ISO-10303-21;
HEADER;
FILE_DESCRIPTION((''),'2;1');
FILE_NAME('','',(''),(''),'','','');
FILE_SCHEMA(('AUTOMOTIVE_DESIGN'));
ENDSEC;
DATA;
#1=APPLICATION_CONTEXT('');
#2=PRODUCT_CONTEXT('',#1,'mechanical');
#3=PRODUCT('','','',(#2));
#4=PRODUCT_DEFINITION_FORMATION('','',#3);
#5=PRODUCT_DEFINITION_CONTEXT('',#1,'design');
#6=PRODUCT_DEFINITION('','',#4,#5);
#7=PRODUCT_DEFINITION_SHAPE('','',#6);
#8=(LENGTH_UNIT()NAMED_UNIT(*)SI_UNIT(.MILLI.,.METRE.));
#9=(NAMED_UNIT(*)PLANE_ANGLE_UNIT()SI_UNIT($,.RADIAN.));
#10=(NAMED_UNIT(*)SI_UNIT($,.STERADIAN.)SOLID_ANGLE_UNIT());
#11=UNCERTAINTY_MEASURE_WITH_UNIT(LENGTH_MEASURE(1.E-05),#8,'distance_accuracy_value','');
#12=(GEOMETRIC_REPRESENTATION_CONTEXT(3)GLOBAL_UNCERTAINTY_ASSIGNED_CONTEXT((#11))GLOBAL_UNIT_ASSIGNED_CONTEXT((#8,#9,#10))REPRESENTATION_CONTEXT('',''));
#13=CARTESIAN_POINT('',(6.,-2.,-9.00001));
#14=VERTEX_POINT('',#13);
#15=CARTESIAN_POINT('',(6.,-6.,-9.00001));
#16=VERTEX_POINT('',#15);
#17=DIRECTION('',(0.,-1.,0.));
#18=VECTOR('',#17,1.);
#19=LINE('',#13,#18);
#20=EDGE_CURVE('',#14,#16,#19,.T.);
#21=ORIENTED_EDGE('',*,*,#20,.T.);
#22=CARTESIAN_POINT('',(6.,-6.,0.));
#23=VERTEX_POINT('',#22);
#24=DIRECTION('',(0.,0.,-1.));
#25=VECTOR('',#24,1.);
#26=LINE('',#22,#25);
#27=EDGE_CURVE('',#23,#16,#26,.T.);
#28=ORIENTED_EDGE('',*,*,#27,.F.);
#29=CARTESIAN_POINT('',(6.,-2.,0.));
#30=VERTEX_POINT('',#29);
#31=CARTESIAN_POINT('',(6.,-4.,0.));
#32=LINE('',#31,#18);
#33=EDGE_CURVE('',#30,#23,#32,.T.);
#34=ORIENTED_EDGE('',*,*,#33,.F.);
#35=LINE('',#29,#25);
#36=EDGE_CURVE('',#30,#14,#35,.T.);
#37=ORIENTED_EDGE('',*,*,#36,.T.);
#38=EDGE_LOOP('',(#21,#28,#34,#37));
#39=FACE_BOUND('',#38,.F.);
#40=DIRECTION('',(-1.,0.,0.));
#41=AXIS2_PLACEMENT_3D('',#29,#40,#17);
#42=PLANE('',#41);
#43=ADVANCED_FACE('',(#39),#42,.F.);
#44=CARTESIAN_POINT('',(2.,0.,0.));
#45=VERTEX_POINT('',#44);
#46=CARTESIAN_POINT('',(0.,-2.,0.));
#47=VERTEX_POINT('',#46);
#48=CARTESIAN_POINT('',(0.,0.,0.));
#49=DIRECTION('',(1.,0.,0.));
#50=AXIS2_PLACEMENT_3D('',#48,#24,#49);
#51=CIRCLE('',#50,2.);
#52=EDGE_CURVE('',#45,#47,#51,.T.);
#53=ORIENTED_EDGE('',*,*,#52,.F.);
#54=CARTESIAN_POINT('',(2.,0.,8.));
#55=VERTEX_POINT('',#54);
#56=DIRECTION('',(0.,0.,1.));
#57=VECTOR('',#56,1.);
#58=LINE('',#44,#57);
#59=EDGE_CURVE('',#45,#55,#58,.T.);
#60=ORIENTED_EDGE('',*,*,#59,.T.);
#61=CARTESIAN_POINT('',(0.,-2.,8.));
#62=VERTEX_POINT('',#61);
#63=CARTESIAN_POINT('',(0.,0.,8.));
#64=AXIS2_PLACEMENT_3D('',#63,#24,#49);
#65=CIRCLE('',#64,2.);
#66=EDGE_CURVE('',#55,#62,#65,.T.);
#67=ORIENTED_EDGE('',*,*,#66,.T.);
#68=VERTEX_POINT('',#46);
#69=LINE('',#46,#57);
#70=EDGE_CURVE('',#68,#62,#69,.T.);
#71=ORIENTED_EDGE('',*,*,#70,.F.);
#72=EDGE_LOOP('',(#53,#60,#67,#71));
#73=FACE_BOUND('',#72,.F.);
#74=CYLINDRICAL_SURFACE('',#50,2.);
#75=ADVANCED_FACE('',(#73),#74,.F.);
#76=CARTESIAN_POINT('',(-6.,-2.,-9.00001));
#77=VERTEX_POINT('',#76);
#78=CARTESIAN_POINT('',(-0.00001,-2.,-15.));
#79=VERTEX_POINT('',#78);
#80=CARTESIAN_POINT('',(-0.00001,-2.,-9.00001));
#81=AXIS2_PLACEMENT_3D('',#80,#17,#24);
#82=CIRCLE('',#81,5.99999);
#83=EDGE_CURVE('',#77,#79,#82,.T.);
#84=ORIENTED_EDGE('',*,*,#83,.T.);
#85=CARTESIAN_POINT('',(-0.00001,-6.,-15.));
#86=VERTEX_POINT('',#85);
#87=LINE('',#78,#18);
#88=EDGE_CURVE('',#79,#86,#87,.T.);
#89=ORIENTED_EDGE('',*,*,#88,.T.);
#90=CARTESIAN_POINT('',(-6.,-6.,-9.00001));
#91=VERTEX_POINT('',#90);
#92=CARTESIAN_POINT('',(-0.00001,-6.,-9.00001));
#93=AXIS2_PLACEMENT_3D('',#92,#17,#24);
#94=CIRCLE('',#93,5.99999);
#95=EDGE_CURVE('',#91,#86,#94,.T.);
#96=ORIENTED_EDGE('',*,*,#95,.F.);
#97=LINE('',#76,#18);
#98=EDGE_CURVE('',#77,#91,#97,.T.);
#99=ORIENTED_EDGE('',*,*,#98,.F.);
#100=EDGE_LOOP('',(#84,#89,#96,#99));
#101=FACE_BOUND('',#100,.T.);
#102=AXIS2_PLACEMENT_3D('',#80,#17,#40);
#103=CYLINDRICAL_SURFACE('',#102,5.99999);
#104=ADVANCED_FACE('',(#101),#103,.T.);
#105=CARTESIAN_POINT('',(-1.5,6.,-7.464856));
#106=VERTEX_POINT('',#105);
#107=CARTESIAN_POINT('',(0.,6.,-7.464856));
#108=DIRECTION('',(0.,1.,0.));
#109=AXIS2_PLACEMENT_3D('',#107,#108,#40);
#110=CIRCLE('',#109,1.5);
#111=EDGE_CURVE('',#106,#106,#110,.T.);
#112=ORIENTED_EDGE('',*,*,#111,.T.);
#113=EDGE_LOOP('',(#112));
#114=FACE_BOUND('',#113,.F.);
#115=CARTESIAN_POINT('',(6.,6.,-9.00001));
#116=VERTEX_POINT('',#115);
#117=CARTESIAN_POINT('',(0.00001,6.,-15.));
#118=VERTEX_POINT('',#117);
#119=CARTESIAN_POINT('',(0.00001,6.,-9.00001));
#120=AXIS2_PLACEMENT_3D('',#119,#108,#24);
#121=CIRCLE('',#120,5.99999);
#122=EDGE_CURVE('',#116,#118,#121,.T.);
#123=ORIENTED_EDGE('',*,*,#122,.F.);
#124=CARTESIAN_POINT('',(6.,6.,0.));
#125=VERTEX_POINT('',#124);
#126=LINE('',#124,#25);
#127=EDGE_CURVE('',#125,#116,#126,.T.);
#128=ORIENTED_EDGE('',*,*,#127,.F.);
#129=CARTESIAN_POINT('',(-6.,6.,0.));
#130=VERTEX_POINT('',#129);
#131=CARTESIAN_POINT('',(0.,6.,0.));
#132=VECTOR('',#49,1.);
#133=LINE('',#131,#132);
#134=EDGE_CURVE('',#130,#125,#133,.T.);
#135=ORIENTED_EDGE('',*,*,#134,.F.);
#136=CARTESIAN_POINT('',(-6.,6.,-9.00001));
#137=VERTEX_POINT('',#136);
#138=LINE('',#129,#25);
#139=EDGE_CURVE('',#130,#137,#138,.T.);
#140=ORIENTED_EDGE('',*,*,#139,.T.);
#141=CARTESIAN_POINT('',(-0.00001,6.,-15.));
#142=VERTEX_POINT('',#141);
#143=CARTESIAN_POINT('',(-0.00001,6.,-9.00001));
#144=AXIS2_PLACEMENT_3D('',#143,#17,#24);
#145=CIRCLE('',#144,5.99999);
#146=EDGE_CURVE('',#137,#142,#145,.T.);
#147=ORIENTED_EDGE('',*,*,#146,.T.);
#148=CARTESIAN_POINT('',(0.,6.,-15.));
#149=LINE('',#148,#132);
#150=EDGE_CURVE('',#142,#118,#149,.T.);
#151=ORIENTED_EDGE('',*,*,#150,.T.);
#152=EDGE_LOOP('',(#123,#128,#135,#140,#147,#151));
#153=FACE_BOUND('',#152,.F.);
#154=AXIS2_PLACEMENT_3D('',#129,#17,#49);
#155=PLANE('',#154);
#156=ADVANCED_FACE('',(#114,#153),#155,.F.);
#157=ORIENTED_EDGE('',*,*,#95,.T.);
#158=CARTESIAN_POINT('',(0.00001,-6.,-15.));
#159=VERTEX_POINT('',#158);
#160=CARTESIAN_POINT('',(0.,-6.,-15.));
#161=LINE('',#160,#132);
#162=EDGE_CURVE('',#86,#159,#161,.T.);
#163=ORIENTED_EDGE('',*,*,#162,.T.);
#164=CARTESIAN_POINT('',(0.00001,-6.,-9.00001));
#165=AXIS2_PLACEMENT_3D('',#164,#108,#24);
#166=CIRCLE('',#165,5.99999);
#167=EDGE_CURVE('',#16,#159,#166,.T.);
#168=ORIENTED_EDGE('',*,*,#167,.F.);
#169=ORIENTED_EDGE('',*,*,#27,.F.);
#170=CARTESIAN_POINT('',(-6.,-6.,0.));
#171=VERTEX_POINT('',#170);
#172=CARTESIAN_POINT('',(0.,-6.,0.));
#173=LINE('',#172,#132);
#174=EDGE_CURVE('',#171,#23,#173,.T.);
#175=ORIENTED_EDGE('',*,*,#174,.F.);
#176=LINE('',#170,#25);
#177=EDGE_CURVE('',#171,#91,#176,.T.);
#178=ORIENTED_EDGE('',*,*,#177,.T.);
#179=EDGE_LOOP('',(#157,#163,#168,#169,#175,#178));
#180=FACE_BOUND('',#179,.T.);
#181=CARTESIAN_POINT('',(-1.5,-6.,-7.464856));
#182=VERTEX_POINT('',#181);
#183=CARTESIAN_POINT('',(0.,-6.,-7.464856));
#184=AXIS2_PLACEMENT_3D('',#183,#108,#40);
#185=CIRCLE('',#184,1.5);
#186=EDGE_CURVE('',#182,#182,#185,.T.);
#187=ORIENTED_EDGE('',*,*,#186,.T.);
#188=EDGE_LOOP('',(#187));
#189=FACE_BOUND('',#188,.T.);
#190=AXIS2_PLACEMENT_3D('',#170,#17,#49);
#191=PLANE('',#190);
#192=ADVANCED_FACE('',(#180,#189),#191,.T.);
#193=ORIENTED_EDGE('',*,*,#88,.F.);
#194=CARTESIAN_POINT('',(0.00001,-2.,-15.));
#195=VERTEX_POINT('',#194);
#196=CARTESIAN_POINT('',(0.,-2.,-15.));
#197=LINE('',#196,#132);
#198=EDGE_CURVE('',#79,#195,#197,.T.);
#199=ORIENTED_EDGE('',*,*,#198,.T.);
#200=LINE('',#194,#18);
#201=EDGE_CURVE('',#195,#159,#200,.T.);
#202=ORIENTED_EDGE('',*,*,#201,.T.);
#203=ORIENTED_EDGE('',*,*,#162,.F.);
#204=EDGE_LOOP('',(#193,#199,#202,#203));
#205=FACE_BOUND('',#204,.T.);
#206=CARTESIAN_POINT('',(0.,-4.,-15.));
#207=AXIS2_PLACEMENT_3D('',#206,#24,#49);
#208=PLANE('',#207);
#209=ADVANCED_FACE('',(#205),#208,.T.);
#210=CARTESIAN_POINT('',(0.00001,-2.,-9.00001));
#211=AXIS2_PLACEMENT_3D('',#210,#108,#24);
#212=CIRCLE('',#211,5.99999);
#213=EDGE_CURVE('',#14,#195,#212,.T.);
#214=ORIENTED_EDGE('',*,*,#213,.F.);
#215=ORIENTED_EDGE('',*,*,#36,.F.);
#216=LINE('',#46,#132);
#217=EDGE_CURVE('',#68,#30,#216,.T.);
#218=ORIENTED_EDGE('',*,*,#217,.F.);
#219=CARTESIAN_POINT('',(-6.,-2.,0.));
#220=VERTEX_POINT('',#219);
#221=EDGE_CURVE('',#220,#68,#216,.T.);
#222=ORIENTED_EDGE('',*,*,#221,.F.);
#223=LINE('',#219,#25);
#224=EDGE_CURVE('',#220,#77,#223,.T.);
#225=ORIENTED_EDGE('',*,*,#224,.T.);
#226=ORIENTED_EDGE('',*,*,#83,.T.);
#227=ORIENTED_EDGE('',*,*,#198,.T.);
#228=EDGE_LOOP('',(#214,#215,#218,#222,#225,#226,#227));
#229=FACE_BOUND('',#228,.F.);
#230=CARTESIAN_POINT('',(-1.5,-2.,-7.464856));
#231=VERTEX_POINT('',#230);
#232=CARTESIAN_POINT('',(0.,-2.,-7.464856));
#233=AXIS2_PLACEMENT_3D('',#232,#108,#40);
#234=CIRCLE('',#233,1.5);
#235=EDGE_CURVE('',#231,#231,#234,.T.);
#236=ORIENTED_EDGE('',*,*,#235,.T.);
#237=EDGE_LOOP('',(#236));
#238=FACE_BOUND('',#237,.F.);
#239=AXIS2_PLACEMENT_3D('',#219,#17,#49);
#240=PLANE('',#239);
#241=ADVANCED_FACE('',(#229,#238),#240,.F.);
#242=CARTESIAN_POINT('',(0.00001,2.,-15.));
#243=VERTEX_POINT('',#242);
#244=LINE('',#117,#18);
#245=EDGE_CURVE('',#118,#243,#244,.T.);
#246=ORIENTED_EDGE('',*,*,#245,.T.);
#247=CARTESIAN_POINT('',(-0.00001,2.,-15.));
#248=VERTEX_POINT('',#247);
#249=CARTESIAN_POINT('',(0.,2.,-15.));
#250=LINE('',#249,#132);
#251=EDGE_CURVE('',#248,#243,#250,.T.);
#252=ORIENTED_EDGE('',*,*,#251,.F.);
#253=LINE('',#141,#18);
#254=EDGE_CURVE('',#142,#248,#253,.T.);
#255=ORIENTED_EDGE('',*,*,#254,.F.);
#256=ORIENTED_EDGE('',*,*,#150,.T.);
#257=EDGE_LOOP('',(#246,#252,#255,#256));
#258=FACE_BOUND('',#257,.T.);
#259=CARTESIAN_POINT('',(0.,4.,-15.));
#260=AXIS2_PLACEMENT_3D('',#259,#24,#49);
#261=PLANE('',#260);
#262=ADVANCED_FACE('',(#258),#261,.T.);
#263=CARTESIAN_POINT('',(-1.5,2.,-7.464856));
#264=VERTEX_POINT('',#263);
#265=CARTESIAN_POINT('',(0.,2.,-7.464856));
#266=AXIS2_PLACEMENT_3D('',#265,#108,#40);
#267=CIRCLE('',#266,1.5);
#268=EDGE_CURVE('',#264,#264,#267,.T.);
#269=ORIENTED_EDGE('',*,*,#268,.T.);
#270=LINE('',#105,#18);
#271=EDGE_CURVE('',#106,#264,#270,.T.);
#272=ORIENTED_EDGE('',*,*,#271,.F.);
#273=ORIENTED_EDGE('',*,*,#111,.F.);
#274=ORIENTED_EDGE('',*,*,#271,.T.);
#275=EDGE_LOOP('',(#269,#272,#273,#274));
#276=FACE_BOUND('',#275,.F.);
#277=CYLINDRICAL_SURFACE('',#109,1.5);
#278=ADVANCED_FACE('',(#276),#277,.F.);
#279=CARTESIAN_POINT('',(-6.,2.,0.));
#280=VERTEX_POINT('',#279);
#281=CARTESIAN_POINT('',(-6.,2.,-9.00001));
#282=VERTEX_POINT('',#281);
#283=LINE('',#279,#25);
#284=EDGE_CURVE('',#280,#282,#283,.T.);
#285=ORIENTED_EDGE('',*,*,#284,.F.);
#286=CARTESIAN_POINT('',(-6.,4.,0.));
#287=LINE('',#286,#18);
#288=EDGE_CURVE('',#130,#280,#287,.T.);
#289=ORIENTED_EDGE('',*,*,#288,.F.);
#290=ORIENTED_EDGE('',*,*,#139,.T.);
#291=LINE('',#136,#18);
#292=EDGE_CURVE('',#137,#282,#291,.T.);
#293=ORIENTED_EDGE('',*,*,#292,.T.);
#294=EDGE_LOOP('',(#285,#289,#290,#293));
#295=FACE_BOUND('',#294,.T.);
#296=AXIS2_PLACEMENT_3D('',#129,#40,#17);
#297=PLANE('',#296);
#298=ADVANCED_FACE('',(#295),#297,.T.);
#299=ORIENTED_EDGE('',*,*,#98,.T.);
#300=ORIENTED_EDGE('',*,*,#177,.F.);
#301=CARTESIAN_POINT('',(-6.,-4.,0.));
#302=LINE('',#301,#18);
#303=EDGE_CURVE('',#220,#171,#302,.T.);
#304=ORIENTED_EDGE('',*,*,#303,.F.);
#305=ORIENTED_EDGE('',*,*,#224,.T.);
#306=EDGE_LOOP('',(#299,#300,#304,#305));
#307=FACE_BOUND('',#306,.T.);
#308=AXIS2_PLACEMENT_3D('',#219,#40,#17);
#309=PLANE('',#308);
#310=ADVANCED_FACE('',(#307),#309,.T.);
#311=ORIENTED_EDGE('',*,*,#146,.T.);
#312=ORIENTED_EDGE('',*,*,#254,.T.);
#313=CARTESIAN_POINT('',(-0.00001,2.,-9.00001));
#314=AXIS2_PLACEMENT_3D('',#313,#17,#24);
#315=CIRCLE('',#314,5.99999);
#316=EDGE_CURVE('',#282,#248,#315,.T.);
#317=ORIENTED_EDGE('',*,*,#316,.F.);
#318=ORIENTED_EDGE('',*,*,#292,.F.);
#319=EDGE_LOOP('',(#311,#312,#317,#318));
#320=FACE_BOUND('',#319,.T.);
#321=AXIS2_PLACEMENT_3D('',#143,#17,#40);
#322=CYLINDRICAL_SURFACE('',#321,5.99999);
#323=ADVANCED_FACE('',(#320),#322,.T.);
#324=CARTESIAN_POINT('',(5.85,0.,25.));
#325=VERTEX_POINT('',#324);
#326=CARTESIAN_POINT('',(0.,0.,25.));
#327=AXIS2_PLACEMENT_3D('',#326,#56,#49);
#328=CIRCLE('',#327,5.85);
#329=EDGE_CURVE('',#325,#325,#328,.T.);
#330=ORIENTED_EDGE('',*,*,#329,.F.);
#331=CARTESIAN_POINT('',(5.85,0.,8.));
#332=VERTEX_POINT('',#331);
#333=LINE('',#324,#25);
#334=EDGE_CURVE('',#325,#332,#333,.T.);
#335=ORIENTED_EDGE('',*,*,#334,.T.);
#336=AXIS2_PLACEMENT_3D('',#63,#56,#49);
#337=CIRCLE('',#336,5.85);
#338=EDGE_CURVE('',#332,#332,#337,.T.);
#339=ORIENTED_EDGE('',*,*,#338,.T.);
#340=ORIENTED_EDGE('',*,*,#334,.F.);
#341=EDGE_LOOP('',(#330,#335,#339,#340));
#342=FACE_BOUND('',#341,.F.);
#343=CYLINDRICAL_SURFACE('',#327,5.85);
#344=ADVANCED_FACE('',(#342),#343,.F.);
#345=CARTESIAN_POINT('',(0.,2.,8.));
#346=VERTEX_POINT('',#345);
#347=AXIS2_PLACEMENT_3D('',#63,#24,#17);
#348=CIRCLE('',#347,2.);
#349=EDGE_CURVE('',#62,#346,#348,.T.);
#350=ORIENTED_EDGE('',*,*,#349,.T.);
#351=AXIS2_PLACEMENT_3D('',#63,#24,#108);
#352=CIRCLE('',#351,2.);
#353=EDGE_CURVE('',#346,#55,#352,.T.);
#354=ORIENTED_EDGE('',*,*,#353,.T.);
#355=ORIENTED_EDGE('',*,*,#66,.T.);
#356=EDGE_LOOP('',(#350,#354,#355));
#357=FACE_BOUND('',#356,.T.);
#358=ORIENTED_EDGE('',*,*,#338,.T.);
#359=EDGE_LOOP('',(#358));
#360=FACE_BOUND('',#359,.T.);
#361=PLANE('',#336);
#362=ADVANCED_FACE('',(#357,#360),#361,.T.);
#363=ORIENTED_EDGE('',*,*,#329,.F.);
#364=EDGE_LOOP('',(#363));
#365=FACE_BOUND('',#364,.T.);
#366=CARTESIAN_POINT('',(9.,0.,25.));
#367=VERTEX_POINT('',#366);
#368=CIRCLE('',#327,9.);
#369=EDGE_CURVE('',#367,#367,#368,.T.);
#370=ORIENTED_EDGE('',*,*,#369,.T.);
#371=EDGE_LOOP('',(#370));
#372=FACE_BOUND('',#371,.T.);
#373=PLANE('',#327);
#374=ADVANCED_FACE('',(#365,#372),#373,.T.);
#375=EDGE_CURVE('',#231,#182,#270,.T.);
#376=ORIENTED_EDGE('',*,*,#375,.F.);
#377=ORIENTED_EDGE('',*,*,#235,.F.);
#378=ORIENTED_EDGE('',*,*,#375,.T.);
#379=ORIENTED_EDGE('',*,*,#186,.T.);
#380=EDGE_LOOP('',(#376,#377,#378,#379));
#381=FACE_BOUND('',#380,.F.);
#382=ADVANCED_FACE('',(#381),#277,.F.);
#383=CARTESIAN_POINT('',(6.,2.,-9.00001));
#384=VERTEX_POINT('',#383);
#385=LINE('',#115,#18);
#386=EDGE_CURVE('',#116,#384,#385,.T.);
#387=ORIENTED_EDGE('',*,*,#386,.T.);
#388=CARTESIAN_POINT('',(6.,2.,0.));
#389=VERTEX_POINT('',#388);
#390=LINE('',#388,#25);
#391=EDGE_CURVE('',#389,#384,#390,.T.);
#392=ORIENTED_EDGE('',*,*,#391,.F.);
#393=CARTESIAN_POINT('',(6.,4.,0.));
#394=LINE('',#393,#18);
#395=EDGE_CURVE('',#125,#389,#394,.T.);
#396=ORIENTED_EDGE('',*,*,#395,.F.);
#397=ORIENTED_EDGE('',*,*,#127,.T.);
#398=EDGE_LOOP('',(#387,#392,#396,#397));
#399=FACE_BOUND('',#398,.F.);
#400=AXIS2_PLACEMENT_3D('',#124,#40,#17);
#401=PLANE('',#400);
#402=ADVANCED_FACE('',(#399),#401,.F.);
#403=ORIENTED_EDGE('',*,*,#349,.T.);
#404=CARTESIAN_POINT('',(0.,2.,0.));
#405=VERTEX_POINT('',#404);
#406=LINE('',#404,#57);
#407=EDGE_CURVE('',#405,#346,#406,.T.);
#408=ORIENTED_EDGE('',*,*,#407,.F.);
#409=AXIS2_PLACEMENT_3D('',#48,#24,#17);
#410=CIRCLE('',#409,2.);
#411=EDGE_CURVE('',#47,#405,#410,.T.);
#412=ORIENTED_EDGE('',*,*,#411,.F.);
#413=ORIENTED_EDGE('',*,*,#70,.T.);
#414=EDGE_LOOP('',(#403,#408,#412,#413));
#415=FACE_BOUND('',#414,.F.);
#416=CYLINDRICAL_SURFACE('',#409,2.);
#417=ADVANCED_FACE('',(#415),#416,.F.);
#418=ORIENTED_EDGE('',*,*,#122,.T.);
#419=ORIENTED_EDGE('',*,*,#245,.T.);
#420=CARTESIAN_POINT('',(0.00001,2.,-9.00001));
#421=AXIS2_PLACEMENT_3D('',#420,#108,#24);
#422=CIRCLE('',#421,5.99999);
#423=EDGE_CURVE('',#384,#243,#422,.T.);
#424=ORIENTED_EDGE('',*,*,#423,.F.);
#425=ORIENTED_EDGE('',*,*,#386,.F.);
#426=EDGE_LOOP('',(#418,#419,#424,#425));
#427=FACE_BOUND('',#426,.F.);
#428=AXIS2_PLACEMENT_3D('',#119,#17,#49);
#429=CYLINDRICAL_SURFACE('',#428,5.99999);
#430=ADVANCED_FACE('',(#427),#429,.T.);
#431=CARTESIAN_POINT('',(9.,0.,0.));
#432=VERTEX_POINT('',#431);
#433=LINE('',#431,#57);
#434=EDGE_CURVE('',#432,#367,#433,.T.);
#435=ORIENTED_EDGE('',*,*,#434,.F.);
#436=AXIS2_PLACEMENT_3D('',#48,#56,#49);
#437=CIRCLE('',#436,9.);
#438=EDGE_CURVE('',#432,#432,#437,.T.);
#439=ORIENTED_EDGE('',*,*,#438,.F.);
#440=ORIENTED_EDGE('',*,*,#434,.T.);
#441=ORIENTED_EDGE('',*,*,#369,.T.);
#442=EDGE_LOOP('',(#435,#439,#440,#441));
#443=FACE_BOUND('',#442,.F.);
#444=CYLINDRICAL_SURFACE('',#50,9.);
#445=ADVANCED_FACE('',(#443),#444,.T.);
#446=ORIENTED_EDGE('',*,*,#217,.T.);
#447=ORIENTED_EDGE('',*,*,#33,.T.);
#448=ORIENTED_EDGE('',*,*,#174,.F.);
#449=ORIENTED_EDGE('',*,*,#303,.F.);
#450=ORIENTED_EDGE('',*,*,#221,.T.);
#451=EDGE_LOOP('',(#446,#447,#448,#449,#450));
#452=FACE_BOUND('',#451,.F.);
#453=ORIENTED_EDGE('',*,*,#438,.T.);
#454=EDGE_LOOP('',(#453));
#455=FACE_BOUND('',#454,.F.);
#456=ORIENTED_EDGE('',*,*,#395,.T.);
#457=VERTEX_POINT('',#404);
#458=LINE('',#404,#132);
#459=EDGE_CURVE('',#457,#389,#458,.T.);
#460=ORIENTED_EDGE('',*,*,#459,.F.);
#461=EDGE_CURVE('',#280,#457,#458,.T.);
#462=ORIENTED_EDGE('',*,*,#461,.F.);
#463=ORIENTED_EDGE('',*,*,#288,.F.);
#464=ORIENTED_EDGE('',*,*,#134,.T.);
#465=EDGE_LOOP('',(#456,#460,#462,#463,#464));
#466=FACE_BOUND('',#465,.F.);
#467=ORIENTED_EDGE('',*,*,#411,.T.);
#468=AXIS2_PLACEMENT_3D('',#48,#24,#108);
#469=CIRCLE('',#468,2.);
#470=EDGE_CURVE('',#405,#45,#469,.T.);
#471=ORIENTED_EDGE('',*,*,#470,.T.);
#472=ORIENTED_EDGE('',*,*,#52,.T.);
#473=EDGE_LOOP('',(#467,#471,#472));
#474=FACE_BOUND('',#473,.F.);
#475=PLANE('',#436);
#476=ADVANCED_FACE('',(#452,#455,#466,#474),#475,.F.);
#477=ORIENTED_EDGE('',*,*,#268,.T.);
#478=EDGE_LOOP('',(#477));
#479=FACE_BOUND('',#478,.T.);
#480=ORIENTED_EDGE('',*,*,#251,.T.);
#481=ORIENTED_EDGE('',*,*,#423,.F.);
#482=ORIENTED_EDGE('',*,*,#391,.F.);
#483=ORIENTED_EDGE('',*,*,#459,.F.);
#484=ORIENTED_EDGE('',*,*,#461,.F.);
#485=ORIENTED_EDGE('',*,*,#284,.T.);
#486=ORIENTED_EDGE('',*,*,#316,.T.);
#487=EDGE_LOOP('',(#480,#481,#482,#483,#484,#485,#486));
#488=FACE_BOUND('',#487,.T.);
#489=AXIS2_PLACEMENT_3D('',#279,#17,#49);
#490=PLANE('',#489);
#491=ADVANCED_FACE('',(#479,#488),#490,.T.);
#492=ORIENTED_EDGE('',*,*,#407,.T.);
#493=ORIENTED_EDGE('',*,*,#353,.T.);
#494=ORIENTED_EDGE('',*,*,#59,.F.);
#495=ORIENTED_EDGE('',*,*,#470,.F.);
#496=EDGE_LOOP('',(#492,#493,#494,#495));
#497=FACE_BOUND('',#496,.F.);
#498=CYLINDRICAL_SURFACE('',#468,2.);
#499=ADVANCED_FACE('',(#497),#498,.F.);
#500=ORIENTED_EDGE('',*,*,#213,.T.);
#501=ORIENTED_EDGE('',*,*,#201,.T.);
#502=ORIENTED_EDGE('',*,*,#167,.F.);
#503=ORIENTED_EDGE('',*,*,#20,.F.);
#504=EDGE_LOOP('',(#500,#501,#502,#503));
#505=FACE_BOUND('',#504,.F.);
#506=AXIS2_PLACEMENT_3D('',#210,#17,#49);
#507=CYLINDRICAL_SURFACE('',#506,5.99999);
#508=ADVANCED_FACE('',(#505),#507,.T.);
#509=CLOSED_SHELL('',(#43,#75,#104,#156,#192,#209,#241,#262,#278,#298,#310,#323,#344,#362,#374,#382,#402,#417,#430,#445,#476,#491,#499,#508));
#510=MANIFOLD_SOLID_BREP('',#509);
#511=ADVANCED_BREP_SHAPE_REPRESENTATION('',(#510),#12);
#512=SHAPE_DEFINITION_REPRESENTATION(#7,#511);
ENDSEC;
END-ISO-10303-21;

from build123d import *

# Parameters (mm, degrees)
F0_R      = 9
F1_DEPTH  = 25
F2_W      = 12
F2_H      = 4
F3_DEPTH  = 15
F4_R      = 1.5
F5_DEPTH  = 12
F6_R      = 5.99999
F7_R      = 5.85
F8_DEPTH  = 17
F10_DEPTH = 8


# Not quite as in the source:
# - a fillet or chamfer is up to 0.001 mm smaller than in the source, because OpenCascade refuses the exact size


with BuildPart() as f1:
    # F0 (on Top) → F1 (new body)
    with BuildSketch(Plane.XY):
        Circle(F0_R)
    extrude(amount=F1_DEPTH)

    # F2 (on face) → F3 (join)
    with BuildSketch(Plane(origin=(0, 0, 0), x_dir=(1, 0, 0), z_dir=(0, 0, -1))):
        with Locations((0, -4)):
            Rectangle(F2_W, F2_H)
        with Locations((0, 4)):
            Rectangle(F2_W, F2_H)
    extrude(amount=F3_DEPTH)

    # F4 (on face) → F5 (cut, through all)
    with BuildSketch(Plane(origin=(0, 6, 0), x_dir=(-1, 0, 0), z_dir=(0, 1, 0))):
        with Locations((0, -7.464856375)):
            Circle(F4_R)
    extrude(amount=-F5_DEPTH, mode=Mode.SUBTRACT)

    # F6 (radius 6 in the source; OpenCascade refuses exactly that, so slightly less here)
    f6_edges = [f1.edges().sort_by_distance(p)[0] for p in [
        (-6, 4, -15),
        (-6, -4, -15),
        (6, -4, -15),
        (6, 4, -15),
    ]]
    fillet(f6_edges, radius=F6_R)

    # F7 (on face) → F8 (cut)
    with BuildSketch(Plane.XY.offset(25)):
        Circle(F7_R)
    extrude(amount=-F8_DEPTH, mode=Mode.SUBTRACT)

    # F9 (on face) → F10 (cut, through all)
    with BuildSketch(Plane(origin=(0, 0, 0), x_dir=(1, 0, 0), z_dir=(0, 0, -1))):
        with BuildLine():
            ThreePointArc((0, -2), (1.4142135624, -1.4142135624), (2, 0))
            ThreePointArc((2, 0), (1.4142135624, 1.4142135624), (0, 2))
            ThreePointArc((0, 2), (-2, 0), (0, -2))
        make_face()
    extrude(amount=-F10_DEPTH, mode=Mode.SUBTRACT)


solid = f1.part
